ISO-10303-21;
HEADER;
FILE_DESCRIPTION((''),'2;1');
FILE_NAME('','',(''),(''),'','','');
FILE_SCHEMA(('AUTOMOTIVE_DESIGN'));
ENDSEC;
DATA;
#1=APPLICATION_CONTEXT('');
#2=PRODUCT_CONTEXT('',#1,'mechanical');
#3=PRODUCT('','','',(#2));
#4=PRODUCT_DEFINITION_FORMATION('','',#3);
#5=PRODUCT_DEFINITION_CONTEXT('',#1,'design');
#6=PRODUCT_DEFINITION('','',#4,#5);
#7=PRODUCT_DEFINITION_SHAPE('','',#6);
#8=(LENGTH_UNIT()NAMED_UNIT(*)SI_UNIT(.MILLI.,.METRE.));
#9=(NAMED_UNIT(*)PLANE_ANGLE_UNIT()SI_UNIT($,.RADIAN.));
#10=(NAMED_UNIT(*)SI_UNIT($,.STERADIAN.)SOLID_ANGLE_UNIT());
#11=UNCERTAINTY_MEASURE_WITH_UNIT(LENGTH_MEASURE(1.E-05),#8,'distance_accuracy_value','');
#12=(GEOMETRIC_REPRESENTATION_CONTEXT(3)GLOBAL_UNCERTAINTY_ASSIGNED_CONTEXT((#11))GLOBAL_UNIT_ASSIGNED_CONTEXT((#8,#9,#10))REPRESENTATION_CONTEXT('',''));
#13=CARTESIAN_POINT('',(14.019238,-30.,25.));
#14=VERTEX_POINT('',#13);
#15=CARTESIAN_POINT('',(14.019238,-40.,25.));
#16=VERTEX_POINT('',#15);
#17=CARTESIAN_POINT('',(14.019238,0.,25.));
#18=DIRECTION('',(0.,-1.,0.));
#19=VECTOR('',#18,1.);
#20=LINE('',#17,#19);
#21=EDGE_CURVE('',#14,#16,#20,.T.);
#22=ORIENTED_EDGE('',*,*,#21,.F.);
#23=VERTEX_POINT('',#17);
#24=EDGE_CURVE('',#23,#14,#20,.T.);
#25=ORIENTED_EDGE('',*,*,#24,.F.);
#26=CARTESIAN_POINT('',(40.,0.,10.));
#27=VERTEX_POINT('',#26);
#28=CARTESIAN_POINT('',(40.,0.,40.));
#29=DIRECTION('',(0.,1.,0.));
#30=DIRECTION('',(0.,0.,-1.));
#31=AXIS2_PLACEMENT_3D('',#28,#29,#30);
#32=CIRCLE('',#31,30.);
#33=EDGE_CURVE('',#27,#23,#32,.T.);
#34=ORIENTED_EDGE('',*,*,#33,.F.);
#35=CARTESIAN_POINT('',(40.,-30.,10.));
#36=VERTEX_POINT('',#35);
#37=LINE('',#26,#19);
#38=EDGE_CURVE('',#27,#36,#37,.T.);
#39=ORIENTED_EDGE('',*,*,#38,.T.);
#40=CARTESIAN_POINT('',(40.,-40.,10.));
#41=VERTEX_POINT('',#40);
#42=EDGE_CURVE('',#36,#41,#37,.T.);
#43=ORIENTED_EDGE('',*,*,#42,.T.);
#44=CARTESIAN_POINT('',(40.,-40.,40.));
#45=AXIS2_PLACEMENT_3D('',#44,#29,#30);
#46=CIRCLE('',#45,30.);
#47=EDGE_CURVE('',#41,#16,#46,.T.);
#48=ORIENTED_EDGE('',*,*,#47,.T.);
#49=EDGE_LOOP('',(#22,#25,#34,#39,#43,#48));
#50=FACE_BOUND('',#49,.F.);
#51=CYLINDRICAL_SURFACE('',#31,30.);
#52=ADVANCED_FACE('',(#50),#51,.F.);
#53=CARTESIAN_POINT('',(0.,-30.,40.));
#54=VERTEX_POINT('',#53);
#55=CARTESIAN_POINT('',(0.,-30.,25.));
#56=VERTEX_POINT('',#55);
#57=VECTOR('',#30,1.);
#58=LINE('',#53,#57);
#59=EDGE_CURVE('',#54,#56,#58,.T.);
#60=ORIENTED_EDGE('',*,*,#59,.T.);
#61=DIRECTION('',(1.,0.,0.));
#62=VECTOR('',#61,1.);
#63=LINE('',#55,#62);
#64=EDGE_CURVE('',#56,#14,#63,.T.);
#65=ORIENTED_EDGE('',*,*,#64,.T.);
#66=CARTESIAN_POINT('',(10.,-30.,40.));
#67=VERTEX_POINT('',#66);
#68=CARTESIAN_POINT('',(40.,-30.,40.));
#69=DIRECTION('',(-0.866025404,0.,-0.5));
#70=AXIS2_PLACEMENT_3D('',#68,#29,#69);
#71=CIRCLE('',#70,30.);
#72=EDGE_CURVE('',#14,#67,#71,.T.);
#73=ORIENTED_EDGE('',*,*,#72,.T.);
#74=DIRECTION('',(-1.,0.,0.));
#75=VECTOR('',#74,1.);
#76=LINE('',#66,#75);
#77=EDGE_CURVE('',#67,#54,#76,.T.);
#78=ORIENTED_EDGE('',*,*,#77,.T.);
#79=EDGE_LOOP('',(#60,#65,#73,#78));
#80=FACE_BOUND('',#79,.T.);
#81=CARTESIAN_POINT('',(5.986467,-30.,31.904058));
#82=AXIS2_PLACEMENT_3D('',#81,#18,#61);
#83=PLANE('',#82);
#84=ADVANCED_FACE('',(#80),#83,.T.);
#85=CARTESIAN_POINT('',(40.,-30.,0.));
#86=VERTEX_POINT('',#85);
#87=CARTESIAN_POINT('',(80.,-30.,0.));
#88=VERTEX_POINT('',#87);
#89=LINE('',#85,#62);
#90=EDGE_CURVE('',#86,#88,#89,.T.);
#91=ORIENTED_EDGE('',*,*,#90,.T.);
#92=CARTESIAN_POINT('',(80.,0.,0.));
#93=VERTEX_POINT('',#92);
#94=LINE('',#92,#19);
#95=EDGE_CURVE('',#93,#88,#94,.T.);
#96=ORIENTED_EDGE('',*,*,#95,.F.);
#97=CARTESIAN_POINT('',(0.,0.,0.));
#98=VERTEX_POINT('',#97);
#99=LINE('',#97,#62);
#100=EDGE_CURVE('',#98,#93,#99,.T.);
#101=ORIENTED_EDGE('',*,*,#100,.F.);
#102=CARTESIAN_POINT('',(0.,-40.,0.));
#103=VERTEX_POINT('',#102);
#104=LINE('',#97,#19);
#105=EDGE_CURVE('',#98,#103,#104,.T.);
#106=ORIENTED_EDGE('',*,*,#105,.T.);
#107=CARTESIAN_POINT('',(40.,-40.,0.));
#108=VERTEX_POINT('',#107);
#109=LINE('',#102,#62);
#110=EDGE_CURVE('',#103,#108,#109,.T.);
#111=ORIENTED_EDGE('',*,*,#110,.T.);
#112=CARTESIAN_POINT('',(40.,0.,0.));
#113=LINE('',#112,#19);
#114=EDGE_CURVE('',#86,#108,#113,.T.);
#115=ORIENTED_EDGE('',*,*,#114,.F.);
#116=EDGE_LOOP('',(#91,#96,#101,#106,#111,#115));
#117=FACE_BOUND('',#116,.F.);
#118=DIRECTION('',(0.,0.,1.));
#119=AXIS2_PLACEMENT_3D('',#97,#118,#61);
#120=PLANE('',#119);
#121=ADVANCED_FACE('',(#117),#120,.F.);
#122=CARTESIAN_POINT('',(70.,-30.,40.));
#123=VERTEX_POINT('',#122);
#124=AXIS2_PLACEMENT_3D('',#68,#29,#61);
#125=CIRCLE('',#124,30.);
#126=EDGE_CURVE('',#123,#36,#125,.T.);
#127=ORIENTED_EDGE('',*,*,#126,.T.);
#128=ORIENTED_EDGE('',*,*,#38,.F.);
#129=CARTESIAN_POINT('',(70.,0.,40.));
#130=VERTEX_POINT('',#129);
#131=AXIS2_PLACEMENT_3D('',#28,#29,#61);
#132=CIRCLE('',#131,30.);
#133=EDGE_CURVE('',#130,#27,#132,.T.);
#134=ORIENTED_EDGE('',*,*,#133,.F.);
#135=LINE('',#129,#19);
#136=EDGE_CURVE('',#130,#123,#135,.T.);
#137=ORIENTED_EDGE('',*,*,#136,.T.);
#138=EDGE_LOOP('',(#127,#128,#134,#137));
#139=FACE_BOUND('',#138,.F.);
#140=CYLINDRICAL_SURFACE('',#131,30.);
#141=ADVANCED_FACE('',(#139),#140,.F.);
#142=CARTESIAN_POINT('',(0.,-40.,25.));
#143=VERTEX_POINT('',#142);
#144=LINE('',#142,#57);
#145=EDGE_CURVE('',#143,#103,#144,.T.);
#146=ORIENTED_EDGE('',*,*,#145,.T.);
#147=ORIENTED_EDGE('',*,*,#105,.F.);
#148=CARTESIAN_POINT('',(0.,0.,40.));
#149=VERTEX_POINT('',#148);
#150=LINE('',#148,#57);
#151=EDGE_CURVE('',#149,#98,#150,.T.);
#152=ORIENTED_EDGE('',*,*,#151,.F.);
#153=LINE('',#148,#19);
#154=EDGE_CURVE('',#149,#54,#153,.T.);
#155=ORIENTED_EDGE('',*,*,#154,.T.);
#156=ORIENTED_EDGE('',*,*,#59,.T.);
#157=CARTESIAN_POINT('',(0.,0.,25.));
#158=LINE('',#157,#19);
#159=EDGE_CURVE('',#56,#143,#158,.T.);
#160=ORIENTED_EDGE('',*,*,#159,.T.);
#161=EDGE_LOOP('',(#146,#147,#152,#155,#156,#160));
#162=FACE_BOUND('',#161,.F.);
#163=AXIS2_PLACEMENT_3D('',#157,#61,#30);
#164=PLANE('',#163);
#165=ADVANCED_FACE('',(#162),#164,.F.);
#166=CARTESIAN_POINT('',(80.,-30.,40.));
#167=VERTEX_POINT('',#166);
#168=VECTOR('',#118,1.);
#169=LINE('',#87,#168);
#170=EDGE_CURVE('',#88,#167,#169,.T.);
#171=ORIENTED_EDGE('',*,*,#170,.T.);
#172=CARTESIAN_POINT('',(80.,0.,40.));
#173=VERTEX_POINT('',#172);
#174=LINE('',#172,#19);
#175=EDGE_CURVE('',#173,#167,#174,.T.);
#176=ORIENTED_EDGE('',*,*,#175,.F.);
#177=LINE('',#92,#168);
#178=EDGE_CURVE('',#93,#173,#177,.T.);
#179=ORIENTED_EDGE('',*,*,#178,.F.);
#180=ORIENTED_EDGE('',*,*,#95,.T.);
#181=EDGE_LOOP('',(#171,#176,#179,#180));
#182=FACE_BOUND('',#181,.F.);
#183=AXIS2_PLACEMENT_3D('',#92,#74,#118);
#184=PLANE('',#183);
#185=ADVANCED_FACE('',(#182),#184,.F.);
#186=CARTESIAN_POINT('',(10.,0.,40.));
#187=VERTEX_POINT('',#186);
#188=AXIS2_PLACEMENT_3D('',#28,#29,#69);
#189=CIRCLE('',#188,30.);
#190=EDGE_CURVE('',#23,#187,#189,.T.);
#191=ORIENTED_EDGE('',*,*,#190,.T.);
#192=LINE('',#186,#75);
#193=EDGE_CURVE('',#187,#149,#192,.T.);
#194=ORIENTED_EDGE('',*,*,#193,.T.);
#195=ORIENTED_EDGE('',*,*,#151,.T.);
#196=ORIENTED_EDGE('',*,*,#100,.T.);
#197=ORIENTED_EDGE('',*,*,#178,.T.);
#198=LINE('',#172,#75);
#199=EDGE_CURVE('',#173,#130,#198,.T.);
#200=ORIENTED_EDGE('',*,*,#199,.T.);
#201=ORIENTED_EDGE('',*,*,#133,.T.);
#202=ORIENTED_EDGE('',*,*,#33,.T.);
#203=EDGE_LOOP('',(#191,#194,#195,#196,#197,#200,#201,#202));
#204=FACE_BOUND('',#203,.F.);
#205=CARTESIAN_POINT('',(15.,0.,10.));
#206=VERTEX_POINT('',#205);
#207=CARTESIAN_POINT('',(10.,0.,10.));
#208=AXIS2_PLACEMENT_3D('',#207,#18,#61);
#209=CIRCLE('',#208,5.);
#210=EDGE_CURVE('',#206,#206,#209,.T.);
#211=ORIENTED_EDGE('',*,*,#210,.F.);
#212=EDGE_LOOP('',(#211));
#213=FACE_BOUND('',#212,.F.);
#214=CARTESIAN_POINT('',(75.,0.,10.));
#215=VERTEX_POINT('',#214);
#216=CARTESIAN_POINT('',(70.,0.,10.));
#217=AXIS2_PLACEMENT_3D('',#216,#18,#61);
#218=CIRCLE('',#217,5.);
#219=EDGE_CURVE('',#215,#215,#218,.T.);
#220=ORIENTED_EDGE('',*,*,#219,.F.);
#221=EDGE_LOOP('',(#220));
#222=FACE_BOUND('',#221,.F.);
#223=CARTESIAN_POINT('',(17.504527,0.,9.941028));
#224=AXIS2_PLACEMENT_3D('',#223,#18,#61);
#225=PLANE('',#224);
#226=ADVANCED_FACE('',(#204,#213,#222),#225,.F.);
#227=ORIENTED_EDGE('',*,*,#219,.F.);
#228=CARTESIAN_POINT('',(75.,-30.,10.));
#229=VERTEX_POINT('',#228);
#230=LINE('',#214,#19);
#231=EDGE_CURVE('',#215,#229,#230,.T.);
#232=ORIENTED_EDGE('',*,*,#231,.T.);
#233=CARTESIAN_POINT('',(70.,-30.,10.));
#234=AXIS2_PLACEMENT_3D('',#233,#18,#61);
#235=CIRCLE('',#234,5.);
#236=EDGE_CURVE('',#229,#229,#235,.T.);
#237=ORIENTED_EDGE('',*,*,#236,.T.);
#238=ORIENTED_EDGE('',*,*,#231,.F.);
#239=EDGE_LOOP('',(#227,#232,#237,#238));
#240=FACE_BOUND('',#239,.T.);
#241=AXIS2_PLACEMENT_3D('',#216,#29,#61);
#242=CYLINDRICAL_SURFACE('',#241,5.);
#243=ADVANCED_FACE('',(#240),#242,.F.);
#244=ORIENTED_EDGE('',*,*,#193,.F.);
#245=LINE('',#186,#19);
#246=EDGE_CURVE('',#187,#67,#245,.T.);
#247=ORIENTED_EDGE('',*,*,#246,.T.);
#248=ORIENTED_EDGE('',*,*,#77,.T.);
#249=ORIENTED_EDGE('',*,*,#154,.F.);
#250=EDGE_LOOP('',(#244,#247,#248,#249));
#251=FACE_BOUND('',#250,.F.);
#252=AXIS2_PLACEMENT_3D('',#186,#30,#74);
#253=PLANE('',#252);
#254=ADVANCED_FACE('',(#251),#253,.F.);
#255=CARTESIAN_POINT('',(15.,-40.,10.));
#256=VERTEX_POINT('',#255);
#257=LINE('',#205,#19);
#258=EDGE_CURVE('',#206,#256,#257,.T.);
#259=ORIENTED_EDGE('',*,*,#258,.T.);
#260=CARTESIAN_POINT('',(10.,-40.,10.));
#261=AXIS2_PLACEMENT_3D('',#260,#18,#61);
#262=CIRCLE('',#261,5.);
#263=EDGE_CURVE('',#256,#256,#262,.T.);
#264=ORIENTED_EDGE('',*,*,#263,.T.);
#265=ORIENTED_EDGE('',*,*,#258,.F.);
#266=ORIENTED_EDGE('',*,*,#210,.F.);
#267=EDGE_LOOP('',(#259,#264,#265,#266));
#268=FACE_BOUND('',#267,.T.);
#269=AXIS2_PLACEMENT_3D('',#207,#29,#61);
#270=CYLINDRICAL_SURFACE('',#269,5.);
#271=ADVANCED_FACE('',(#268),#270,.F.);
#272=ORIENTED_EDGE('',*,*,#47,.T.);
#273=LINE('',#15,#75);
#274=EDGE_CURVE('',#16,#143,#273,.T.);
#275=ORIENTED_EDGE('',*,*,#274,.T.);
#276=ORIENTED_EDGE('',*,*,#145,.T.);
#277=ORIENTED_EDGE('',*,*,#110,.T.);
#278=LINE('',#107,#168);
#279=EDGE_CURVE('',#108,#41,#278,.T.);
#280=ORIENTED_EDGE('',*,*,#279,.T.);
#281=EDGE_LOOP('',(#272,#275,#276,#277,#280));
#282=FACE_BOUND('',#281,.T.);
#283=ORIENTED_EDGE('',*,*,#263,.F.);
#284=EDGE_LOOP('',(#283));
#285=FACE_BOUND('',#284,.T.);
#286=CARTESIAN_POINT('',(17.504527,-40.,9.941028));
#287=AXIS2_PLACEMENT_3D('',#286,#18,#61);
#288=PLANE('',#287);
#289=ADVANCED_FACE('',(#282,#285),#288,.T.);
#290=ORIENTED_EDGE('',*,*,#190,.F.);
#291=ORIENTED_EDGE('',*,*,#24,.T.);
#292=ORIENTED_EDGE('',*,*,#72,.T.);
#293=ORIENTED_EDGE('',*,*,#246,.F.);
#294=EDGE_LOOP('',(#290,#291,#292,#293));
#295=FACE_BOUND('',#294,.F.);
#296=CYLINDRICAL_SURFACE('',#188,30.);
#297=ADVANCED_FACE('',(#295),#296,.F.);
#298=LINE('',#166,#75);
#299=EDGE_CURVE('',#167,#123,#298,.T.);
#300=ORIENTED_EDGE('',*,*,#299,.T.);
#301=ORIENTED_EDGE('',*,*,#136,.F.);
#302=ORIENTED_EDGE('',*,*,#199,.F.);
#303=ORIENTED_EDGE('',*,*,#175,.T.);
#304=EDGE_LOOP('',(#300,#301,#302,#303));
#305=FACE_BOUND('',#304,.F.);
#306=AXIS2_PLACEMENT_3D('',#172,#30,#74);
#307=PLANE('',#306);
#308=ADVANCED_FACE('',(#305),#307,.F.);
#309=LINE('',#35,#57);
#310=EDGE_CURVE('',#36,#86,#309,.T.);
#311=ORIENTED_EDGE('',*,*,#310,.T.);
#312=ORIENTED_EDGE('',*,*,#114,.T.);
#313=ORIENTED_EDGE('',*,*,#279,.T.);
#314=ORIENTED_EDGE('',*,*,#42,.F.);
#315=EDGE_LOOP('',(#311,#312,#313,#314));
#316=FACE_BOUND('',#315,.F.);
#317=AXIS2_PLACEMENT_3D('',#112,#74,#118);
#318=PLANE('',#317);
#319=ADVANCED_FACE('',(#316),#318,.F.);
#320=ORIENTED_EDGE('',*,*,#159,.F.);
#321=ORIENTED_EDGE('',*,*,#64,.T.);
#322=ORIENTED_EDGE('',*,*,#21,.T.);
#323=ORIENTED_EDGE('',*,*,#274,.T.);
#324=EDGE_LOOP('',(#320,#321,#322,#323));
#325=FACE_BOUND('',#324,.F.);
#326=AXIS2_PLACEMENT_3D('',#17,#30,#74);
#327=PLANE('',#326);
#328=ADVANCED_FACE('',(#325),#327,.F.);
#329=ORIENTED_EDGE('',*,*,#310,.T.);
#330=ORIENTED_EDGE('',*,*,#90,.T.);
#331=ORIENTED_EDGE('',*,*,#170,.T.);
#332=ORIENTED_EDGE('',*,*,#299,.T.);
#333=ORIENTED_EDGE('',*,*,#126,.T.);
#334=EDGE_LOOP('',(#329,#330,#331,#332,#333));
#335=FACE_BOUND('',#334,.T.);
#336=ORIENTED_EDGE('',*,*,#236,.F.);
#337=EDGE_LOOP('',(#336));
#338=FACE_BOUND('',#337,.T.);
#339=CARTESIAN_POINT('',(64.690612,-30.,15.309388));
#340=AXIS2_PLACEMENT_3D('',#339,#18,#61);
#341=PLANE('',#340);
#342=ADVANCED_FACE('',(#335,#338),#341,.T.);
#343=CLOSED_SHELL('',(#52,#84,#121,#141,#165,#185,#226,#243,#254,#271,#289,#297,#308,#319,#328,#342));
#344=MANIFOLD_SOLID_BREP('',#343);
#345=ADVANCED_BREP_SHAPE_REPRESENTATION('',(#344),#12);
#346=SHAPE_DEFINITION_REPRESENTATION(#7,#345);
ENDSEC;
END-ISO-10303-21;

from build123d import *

# Parameters (mm, degrees)
F1_DEPTH = 30
F0_R     = 5
F2_DEPTH = 40


# Not quite as in the source:
# - a feature of the source that left no trace in its solid (it failed there, or was rolled back) is left out


with BuildPart() as f1:
    # F0 (on Front) → F1 (new body)
    with BuildSketch(Plane.XZ):
        with BuildLine():
            Line((10, 40), (0, 40))
            Line((0, 40), (0, 25))
            Line((0, 25), (14.0192378865, 25))
            ThreePointArc((14.0192378865, 25), (11.0222252113, 32.2354286469), (10, 40))
        make_face()
    extrude(amount=F1_DEPTH)



with BuildPart() as f1b:
    # F0 (on Front) → F1, piece 2 (new body)
    with BuildSketch(Plane.XZ):
        with BuildLine():
            Line((40, 10), (40, 0))
            Line((40, 0), (80, 0))
            Line((80, 0), (80, 40))
            Line((80, 40), (70, 40))
            ThreePointArc((70, 40), (61.2132034356, 18.7867965644), (40, 10))
        make_face()
        with Locations((70, 10)):
            Circle(F0_R, mode=Mode.SUBTRACT)
    extrude(amount=F1_DEPTH)


with BuildPart() as f1_1:
    add(f1.part)

    add(f1b.part)  # F2 merges F1b
    # F0 (on Front) → F2 (join)
    with BuildSketch(Plane.XZ):
        with BuildLine():
            Line((14.0192378865, 25), (0, 25))
            Line((0, 25), (0, 0))
            Line((0, 0), (40, 0))
            Line((40, 0), (40, 10))
            ThreePointArc((40, 10), (25, 14.0192378865), (14.0192378865, 25))
        make_face()
        with Locations((10, 10)):
            Circle(F0_R, mode=Mode.SUBTRACT)
    extrude(amount=F2_DEPTH)


solid = f1_1.part
